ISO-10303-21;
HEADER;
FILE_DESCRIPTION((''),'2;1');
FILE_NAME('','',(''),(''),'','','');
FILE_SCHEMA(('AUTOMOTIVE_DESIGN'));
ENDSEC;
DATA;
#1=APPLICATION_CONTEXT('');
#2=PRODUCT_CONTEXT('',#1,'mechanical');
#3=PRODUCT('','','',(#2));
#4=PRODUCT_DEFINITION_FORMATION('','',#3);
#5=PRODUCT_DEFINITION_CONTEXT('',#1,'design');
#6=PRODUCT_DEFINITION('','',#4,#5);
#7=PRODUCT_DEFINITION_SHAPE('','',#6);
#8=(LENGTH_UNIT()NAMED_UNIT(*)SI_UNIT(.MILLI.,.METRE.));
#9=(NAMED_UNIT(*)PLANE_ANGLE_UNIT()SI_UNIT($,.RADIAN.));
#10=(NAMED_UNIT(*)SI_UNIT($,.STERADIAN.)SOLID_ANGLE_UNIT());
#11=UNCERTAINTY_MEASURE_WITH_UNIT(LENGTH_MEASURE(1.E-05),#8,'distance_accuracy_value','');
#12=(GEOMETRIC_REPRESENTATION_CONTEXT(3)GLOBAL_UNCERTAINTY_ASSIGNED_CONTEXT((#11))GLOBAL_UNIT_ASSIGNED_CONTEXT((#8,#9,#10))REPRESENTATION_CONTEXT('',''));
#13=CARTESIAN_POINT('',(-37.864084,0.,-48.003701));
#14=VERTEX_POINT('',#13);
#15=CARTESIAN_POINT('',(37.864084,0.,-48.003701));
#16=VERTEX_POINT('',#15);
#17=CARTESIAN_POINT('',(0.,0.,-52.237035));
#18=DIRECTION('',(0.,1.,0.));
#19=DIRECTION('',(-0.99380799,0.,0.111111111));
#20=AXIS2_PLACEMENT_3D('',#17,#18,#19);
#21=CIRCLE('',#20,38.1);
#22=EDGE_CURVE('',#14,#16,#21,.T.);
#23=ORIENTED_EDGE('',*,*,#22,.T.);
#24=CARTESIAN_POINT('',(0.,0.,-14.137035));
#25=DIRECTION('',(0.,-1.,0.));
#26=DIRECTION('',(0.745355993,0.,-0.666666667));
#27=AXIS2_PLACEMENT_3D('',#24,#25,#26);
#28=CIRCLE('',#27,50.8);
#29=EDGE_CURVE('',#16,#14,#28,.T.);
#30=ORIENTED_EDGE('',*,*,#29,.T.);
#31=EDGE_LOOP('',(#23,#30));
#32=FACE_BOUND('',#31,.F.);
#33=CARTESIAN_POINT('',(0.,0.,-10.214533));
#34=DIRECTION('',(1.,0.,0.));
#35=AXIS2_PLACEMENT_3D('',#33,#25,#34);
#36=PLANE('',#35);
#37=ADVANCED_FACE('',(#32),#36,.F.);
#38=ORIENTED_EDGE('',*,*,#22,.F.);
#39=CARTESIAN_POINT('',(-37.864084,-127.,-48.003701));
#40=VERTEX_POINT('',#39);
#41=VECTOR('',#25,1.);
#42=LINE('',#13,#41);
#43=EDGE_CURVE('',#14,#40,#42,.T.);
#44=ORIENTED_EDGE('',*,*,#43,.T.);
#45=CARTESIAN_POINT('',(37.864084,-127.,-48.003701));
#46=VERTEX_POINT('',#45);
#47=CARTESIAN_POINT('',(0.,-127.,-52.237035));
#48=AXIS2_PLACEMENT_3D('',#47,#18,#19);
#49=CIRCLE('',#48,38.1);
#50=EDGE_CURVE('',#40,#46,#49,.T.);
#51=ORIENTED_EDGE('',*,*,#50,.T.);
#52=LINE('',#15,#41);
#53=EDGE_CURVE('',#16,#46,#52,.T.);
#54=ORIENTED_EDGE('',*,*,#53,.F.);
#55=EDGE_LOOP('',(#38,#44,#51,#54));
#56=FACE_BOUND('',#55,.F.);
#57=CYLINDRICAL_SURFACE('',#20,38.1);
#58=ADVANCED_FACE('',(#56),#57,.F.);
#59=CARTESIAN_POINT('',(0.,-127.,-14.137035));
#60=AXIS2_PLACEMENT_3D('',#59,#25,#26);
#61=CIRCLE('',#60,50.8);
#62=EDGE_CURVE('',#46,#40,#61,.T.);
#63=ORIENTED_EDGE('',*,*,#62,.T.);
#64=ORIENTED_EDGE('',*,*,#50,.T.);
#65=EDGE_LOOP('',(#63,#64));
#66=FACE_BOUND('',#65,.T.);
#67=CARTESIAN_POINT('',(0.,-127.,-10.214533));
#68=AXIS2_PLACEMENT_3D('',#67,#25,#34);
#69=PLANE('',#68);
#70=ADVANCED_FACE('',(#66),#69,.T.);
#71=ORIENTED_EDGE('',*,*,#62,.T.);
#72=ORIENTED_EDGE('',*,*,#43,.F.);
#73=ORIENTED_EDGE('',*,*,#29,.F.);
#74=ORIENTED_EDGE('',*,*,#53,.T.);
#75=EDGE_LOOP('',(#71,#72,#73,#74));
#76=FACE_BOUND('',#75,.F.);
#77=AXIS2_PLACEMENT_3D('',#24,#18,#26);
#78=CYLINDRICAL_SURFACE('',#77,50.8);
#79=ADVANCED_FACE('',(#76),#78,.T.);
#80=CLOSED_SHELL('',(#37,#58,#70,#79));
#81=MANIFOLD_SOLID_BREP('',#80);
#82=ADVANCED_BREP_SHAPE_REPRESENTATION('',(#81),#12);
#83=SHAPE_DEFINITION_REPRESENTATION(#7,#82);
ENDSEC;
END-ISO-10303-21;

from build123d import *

# Parameters (mm, degrees)
F3_DEPTH = 127


# Not quite as in the source:
# - the program builds the solid bodies; features that only make, move or delete a surface that nothing else refers to are left out


with BuildPart() as f3:
    # F0 (on Front) → F3 (new body)
    with BuildSketch(Plane.XZ):
        with BuildLine():
            ThreePointArc((37.864084419, -48.0037012958), (47.4559558353, -32.2635967896), (50.8, -14.1370346291))
            ThreePointArc((50.8, -14.1370346291), (-18.1265621605, 33.3189212062), (-37.864084419, -48.0037012958))
            ThreePointArc((-37.864084419, -48.0037012958), (0, -14.1370346291), (37.864084419, -48.0037012958))
        make_face()
    extrude(amount=F3_DEPTH)


solid = f3.part
